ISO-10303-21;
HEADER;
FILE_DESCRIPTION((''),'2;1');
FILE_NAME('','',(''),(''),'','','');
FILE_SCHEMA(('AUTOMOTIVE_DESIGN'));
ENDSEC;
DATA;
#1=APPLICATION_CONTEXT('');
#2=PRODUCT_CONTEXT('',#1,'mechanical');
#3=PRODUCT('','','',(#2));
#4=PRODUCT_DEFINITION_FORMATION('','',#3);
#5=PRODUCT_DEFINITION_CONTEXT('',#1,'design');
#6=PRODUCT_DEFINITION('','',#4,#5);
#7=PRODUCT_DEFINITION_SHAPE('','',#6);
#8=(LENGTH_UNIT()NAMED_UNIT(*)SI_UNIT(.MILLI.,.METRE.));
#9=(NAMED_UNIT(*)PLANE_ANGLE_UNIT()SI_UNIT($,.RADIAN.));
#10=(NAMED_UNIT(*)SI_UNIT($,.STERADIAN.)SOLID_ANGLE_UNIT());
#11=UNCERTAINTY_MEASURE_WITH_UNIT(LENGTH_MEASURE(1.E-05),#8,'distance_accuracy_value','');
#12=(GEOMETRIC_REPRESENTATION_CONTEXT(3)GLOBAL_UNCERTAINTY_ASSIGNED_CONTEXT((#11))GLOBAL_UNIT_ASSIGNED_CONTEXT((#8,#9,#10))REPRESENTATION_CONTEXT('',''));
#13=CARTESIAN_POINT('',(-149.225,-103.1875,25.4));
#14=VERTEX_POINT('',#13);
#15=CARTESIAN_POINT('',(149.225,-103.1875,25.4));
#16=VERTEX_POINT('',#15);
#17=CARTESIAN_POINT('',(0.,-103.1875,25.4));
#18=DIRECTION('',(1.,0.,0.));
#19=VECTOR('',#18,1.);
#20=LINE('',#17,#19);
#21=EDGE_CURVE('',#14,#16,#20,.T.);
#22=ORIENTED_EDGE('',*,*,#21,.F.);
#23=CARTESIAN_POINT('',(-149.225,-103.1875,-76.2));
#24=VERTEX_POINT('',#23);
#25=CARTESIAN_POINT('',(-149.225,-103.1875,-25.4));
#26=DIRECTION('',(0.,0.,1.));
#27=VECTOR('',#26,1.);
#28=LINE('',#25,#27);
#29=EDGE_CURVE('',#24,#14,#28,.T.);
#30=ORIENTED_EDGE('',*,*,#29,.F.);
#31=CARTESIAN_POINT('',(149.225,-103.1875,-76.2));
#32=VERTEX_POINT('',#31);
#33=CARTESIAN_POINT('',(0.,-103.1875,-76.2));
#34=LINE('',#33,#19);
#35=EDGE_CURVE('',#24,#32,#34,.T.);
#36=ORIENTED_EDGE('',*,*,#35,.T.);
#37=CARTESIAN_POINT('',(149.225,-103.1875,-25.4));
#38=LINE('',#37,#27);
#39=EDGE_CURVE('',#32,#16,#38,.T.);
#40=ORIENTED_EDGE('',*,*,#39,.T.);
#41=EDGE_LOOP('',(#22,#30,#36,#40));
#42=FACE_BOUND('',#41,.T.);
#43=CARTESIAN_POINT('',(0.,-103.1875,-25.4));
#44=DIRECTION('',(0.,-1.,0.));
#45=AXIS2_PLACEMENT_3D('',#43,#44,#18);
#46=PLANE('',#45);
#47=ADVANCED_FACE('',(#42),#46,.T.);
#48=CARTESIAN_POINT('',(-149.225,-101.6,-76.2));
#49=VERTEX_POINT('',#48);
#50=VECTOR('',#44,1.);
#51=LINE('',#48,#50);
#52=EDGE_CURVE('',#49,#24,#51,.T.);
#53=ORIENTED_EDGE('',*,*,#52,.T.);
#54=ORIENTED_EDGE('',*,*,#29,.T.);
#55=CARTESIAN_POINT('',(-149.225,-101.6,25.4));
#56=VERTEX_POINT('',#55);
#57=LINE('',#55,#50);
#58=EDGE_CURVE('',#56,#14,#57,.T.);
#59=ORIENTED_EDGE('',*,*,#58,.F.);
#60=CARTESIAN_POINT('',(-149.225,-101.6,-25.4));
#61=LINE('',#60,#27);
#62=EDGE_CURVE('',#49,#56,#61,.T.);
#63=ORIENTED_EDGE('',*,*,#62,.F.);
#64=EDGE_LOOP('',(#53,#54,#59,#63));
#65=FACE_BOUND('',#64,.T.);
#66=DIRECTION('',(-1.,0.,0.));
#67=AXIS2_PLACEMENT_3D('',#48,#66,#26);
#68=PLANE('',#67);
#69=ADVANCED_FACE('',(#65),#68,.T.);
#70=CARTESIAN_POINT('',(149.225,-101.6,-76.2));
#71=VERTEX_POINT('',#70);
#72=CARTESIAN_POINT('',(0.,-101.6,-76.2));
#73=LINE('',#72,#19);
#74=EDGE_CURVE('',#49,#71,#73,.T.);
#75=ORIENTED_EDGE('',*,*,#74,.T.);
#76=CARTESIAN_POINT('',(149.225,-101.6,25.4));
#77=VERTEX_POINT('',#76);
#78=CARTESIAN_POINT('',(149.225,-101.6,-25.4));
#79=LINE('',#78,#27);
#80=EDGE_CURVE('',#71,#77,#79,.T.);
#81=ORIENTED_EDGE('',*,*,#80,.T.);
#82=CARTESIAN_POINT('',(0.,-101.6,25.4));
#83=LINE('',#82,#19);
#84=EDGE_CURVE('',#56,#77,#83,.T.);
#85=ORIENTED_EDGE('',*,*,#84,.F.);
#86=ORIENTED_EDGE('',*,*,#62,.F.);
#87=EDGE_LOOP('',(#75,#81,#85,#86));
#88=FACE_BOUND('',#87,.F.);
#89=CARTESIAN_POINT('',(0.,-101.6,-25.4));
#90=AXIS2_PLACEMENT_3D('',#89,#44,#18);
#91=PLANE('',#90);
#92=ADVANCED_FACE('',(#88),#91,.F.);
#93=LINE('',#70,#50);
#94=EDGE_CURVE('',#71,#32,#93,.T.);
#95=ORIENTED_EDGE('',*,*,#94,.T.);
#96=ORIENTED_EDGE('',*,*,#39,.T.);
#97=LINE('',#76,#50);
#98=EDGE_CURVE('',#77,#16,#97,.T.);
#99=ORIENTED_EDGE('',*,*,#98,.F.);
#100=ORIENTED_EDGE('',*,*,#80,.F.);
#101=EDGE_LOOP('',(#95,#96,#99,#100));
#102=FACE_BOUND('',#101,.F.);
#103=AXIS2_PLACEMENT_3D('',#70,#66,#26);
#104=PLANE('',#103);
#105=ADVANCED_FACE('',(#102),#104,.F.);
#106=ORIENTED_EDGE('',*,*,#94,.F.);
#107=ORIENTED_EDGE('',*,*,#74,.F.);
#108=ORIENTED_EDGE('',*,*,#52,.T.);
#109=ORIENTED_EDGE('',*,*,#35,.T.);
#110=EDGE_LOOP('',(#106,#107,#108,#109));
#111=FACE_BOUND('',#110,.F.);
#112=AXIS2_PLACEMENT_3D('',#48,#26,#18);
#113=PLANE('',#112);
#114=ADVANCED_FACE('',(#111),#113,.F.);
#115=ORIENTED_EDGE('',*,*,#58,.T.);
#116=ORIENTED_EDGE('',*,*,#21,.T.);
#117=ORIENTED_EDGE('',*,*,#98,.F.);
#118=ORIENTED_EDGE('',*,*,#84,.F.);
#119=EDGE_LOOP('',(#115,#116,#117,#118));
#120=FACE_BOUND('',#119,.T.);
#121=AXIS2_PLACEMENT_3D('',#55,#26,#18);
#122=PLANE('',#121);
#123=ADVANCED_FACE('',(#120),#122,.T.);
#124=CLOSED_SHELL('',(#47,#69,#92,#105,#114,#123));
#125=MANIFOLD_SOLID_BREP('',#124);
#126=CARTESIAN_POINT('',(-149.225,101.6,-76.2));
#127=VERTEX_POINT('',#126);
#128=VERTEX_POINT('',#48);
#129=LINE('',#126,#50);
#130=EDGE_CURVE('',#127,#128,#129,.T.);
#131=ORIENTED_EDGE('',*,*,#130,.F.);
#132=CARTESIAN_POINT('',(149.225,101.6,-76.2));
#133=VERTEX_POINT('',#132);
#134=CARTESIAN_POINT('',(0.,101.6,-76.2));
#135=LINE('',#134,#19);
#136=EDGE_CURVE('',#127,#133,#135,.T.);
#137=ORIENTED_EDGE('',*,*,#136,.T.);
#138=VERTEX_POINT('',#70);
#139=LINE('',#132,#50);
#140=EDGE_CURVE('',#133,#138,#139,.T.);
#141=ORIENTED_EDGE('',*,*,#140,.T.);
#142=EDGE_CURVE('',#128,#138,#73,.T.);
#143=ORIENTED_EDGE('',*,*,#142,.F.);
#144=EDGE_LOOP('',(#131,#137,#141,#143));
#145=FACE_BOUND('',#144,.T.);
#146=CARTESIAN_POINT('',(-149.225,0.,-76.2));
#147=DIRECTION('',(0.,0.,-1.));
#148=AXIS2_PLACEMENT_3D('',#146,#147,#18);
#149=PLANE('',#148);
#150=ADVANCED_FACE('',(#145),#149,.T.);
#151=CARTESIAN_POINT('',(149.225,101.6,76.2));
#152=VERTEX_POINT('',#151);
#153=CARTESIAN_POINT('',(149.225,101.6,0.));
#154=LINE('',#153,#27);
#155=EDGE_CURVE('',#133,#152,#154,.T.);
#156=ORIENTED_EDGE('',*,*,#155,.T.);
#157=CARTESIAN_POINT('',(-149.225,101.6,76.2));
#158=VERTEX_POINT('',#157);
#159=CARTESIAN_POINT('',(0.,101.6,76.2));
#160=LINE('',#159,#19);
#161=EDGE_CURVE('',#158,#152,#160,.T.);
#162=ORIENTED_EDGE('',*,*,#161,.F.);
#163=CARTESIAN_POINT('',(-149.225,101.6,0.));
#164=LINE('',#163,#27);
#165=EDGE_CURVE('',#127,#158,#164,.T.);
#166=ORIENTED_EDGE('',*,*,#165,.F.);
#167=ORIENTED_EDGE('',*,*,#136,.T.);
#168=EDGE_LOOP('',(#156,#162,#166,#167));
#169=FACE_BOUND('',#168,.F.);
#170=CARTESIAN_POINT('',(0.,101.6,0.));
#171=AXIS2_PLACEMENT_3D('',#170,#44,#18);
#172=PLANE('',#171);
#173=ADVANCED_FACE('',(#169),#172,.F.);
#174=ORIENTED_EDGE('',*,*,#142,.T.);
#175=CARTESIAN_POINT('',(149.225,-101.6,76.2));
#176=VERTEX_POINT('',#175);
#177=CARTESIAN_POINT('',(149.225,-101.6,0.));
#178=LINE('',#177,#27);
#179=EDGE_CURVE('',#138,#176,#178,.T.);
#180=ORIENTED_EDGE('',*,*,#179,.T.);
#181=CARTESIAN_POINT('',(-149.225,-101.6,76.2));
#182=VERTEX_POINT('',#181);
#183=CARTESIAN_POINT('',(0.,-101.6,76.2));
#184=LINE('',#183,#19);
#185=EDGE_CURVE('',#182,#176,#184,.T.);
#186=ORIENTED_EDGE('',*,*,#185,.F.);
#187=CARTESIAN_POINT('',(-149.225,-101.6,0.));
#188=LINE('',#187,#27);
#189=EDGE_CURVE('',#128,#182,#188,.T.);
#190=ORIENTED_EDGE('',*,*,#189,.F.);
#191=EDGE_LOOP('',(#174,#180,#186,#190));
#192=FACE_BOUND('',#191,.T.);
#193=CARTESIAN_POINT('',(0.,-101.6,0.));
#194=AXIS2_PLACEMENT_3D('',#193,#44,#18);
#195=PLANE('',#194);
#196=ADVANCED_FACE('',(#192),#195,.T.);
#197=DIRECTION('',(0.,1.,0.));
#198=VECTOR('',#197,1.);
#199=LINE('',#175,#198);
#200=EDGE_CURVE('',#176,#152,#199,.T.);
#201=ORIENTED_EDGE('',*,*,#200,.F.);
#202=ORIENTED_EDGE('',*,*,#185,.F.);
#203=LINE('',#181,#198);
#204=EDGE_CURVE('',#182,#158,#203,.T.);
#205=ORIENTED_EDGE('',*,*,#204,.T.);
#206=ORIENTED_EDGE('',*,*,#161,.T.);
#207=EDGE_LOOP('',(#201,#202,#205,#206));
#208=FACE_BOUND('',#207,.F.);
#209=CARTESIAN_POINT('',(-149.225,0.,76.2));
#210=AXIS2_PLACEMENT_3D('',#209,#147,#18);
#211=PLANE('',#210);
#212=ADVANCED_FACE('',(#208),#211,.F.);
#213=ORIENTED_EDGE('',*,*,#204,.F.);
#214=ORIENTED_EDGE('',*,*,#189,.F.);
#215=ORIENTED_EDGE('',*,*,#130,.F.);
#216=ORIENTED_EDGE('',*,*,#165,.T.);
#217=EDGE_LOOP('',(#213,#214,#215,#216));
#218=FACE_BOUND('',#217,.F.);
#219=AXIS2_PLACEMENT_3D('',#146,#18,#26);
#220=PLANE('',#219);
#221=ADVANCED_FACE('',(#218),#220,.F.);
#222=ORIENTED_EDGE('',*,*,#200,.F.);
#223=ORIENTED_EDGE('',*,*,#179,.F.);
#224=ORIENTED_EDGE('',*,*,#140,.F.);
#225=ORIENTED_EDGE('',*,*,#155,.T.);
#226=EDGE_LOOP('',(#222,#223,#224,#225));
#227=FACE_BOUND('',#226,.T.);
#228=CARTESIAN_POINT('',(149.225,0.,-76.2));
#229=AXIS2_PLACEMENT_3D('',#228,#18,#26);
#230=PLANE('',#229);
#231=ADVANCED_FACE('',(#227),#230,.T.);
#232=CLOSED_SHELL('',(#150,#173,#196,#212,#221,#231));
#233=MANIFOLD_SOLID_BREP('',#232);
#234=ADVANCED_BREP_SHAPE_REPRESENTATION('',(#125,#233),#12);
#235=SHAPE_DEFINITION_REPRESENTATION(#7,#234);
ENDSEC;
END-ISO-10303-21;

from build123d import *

# Parameters (mm, degrees)
F0_W     = 298.45
F0_H     = 152.4
F1_DEPTH = 101.6
F2_W     = 298.45
F2_H     = 101.6
F3_DEPTH = 1.5875


# Not quite as in the source:
# - a length typed as a fraction of an inch, garbled in the dataset ("3 / 203.2 mm" for 3/8 in), is restored


with BuildPart() as f1:
    # F0 (on Front) → F1 (new body, symmetric)
    with BuildSketch(Plane.XZ):
        Rectangle(F0_W, F0_H)
    extrude(amount=F1_DEPTH, both=True)


with BuildPart() as f3:
    # F2 (on face) → F3 (new body)
    with BuildSketch(Plane.XZ.offset(101.6)):
        with Locations((0, -25.4)):
            Rectangle(F2_W, F2_H)
    extrude(amount=F3_DEPTH)


solid = Compound([f1.part, f3.part])
